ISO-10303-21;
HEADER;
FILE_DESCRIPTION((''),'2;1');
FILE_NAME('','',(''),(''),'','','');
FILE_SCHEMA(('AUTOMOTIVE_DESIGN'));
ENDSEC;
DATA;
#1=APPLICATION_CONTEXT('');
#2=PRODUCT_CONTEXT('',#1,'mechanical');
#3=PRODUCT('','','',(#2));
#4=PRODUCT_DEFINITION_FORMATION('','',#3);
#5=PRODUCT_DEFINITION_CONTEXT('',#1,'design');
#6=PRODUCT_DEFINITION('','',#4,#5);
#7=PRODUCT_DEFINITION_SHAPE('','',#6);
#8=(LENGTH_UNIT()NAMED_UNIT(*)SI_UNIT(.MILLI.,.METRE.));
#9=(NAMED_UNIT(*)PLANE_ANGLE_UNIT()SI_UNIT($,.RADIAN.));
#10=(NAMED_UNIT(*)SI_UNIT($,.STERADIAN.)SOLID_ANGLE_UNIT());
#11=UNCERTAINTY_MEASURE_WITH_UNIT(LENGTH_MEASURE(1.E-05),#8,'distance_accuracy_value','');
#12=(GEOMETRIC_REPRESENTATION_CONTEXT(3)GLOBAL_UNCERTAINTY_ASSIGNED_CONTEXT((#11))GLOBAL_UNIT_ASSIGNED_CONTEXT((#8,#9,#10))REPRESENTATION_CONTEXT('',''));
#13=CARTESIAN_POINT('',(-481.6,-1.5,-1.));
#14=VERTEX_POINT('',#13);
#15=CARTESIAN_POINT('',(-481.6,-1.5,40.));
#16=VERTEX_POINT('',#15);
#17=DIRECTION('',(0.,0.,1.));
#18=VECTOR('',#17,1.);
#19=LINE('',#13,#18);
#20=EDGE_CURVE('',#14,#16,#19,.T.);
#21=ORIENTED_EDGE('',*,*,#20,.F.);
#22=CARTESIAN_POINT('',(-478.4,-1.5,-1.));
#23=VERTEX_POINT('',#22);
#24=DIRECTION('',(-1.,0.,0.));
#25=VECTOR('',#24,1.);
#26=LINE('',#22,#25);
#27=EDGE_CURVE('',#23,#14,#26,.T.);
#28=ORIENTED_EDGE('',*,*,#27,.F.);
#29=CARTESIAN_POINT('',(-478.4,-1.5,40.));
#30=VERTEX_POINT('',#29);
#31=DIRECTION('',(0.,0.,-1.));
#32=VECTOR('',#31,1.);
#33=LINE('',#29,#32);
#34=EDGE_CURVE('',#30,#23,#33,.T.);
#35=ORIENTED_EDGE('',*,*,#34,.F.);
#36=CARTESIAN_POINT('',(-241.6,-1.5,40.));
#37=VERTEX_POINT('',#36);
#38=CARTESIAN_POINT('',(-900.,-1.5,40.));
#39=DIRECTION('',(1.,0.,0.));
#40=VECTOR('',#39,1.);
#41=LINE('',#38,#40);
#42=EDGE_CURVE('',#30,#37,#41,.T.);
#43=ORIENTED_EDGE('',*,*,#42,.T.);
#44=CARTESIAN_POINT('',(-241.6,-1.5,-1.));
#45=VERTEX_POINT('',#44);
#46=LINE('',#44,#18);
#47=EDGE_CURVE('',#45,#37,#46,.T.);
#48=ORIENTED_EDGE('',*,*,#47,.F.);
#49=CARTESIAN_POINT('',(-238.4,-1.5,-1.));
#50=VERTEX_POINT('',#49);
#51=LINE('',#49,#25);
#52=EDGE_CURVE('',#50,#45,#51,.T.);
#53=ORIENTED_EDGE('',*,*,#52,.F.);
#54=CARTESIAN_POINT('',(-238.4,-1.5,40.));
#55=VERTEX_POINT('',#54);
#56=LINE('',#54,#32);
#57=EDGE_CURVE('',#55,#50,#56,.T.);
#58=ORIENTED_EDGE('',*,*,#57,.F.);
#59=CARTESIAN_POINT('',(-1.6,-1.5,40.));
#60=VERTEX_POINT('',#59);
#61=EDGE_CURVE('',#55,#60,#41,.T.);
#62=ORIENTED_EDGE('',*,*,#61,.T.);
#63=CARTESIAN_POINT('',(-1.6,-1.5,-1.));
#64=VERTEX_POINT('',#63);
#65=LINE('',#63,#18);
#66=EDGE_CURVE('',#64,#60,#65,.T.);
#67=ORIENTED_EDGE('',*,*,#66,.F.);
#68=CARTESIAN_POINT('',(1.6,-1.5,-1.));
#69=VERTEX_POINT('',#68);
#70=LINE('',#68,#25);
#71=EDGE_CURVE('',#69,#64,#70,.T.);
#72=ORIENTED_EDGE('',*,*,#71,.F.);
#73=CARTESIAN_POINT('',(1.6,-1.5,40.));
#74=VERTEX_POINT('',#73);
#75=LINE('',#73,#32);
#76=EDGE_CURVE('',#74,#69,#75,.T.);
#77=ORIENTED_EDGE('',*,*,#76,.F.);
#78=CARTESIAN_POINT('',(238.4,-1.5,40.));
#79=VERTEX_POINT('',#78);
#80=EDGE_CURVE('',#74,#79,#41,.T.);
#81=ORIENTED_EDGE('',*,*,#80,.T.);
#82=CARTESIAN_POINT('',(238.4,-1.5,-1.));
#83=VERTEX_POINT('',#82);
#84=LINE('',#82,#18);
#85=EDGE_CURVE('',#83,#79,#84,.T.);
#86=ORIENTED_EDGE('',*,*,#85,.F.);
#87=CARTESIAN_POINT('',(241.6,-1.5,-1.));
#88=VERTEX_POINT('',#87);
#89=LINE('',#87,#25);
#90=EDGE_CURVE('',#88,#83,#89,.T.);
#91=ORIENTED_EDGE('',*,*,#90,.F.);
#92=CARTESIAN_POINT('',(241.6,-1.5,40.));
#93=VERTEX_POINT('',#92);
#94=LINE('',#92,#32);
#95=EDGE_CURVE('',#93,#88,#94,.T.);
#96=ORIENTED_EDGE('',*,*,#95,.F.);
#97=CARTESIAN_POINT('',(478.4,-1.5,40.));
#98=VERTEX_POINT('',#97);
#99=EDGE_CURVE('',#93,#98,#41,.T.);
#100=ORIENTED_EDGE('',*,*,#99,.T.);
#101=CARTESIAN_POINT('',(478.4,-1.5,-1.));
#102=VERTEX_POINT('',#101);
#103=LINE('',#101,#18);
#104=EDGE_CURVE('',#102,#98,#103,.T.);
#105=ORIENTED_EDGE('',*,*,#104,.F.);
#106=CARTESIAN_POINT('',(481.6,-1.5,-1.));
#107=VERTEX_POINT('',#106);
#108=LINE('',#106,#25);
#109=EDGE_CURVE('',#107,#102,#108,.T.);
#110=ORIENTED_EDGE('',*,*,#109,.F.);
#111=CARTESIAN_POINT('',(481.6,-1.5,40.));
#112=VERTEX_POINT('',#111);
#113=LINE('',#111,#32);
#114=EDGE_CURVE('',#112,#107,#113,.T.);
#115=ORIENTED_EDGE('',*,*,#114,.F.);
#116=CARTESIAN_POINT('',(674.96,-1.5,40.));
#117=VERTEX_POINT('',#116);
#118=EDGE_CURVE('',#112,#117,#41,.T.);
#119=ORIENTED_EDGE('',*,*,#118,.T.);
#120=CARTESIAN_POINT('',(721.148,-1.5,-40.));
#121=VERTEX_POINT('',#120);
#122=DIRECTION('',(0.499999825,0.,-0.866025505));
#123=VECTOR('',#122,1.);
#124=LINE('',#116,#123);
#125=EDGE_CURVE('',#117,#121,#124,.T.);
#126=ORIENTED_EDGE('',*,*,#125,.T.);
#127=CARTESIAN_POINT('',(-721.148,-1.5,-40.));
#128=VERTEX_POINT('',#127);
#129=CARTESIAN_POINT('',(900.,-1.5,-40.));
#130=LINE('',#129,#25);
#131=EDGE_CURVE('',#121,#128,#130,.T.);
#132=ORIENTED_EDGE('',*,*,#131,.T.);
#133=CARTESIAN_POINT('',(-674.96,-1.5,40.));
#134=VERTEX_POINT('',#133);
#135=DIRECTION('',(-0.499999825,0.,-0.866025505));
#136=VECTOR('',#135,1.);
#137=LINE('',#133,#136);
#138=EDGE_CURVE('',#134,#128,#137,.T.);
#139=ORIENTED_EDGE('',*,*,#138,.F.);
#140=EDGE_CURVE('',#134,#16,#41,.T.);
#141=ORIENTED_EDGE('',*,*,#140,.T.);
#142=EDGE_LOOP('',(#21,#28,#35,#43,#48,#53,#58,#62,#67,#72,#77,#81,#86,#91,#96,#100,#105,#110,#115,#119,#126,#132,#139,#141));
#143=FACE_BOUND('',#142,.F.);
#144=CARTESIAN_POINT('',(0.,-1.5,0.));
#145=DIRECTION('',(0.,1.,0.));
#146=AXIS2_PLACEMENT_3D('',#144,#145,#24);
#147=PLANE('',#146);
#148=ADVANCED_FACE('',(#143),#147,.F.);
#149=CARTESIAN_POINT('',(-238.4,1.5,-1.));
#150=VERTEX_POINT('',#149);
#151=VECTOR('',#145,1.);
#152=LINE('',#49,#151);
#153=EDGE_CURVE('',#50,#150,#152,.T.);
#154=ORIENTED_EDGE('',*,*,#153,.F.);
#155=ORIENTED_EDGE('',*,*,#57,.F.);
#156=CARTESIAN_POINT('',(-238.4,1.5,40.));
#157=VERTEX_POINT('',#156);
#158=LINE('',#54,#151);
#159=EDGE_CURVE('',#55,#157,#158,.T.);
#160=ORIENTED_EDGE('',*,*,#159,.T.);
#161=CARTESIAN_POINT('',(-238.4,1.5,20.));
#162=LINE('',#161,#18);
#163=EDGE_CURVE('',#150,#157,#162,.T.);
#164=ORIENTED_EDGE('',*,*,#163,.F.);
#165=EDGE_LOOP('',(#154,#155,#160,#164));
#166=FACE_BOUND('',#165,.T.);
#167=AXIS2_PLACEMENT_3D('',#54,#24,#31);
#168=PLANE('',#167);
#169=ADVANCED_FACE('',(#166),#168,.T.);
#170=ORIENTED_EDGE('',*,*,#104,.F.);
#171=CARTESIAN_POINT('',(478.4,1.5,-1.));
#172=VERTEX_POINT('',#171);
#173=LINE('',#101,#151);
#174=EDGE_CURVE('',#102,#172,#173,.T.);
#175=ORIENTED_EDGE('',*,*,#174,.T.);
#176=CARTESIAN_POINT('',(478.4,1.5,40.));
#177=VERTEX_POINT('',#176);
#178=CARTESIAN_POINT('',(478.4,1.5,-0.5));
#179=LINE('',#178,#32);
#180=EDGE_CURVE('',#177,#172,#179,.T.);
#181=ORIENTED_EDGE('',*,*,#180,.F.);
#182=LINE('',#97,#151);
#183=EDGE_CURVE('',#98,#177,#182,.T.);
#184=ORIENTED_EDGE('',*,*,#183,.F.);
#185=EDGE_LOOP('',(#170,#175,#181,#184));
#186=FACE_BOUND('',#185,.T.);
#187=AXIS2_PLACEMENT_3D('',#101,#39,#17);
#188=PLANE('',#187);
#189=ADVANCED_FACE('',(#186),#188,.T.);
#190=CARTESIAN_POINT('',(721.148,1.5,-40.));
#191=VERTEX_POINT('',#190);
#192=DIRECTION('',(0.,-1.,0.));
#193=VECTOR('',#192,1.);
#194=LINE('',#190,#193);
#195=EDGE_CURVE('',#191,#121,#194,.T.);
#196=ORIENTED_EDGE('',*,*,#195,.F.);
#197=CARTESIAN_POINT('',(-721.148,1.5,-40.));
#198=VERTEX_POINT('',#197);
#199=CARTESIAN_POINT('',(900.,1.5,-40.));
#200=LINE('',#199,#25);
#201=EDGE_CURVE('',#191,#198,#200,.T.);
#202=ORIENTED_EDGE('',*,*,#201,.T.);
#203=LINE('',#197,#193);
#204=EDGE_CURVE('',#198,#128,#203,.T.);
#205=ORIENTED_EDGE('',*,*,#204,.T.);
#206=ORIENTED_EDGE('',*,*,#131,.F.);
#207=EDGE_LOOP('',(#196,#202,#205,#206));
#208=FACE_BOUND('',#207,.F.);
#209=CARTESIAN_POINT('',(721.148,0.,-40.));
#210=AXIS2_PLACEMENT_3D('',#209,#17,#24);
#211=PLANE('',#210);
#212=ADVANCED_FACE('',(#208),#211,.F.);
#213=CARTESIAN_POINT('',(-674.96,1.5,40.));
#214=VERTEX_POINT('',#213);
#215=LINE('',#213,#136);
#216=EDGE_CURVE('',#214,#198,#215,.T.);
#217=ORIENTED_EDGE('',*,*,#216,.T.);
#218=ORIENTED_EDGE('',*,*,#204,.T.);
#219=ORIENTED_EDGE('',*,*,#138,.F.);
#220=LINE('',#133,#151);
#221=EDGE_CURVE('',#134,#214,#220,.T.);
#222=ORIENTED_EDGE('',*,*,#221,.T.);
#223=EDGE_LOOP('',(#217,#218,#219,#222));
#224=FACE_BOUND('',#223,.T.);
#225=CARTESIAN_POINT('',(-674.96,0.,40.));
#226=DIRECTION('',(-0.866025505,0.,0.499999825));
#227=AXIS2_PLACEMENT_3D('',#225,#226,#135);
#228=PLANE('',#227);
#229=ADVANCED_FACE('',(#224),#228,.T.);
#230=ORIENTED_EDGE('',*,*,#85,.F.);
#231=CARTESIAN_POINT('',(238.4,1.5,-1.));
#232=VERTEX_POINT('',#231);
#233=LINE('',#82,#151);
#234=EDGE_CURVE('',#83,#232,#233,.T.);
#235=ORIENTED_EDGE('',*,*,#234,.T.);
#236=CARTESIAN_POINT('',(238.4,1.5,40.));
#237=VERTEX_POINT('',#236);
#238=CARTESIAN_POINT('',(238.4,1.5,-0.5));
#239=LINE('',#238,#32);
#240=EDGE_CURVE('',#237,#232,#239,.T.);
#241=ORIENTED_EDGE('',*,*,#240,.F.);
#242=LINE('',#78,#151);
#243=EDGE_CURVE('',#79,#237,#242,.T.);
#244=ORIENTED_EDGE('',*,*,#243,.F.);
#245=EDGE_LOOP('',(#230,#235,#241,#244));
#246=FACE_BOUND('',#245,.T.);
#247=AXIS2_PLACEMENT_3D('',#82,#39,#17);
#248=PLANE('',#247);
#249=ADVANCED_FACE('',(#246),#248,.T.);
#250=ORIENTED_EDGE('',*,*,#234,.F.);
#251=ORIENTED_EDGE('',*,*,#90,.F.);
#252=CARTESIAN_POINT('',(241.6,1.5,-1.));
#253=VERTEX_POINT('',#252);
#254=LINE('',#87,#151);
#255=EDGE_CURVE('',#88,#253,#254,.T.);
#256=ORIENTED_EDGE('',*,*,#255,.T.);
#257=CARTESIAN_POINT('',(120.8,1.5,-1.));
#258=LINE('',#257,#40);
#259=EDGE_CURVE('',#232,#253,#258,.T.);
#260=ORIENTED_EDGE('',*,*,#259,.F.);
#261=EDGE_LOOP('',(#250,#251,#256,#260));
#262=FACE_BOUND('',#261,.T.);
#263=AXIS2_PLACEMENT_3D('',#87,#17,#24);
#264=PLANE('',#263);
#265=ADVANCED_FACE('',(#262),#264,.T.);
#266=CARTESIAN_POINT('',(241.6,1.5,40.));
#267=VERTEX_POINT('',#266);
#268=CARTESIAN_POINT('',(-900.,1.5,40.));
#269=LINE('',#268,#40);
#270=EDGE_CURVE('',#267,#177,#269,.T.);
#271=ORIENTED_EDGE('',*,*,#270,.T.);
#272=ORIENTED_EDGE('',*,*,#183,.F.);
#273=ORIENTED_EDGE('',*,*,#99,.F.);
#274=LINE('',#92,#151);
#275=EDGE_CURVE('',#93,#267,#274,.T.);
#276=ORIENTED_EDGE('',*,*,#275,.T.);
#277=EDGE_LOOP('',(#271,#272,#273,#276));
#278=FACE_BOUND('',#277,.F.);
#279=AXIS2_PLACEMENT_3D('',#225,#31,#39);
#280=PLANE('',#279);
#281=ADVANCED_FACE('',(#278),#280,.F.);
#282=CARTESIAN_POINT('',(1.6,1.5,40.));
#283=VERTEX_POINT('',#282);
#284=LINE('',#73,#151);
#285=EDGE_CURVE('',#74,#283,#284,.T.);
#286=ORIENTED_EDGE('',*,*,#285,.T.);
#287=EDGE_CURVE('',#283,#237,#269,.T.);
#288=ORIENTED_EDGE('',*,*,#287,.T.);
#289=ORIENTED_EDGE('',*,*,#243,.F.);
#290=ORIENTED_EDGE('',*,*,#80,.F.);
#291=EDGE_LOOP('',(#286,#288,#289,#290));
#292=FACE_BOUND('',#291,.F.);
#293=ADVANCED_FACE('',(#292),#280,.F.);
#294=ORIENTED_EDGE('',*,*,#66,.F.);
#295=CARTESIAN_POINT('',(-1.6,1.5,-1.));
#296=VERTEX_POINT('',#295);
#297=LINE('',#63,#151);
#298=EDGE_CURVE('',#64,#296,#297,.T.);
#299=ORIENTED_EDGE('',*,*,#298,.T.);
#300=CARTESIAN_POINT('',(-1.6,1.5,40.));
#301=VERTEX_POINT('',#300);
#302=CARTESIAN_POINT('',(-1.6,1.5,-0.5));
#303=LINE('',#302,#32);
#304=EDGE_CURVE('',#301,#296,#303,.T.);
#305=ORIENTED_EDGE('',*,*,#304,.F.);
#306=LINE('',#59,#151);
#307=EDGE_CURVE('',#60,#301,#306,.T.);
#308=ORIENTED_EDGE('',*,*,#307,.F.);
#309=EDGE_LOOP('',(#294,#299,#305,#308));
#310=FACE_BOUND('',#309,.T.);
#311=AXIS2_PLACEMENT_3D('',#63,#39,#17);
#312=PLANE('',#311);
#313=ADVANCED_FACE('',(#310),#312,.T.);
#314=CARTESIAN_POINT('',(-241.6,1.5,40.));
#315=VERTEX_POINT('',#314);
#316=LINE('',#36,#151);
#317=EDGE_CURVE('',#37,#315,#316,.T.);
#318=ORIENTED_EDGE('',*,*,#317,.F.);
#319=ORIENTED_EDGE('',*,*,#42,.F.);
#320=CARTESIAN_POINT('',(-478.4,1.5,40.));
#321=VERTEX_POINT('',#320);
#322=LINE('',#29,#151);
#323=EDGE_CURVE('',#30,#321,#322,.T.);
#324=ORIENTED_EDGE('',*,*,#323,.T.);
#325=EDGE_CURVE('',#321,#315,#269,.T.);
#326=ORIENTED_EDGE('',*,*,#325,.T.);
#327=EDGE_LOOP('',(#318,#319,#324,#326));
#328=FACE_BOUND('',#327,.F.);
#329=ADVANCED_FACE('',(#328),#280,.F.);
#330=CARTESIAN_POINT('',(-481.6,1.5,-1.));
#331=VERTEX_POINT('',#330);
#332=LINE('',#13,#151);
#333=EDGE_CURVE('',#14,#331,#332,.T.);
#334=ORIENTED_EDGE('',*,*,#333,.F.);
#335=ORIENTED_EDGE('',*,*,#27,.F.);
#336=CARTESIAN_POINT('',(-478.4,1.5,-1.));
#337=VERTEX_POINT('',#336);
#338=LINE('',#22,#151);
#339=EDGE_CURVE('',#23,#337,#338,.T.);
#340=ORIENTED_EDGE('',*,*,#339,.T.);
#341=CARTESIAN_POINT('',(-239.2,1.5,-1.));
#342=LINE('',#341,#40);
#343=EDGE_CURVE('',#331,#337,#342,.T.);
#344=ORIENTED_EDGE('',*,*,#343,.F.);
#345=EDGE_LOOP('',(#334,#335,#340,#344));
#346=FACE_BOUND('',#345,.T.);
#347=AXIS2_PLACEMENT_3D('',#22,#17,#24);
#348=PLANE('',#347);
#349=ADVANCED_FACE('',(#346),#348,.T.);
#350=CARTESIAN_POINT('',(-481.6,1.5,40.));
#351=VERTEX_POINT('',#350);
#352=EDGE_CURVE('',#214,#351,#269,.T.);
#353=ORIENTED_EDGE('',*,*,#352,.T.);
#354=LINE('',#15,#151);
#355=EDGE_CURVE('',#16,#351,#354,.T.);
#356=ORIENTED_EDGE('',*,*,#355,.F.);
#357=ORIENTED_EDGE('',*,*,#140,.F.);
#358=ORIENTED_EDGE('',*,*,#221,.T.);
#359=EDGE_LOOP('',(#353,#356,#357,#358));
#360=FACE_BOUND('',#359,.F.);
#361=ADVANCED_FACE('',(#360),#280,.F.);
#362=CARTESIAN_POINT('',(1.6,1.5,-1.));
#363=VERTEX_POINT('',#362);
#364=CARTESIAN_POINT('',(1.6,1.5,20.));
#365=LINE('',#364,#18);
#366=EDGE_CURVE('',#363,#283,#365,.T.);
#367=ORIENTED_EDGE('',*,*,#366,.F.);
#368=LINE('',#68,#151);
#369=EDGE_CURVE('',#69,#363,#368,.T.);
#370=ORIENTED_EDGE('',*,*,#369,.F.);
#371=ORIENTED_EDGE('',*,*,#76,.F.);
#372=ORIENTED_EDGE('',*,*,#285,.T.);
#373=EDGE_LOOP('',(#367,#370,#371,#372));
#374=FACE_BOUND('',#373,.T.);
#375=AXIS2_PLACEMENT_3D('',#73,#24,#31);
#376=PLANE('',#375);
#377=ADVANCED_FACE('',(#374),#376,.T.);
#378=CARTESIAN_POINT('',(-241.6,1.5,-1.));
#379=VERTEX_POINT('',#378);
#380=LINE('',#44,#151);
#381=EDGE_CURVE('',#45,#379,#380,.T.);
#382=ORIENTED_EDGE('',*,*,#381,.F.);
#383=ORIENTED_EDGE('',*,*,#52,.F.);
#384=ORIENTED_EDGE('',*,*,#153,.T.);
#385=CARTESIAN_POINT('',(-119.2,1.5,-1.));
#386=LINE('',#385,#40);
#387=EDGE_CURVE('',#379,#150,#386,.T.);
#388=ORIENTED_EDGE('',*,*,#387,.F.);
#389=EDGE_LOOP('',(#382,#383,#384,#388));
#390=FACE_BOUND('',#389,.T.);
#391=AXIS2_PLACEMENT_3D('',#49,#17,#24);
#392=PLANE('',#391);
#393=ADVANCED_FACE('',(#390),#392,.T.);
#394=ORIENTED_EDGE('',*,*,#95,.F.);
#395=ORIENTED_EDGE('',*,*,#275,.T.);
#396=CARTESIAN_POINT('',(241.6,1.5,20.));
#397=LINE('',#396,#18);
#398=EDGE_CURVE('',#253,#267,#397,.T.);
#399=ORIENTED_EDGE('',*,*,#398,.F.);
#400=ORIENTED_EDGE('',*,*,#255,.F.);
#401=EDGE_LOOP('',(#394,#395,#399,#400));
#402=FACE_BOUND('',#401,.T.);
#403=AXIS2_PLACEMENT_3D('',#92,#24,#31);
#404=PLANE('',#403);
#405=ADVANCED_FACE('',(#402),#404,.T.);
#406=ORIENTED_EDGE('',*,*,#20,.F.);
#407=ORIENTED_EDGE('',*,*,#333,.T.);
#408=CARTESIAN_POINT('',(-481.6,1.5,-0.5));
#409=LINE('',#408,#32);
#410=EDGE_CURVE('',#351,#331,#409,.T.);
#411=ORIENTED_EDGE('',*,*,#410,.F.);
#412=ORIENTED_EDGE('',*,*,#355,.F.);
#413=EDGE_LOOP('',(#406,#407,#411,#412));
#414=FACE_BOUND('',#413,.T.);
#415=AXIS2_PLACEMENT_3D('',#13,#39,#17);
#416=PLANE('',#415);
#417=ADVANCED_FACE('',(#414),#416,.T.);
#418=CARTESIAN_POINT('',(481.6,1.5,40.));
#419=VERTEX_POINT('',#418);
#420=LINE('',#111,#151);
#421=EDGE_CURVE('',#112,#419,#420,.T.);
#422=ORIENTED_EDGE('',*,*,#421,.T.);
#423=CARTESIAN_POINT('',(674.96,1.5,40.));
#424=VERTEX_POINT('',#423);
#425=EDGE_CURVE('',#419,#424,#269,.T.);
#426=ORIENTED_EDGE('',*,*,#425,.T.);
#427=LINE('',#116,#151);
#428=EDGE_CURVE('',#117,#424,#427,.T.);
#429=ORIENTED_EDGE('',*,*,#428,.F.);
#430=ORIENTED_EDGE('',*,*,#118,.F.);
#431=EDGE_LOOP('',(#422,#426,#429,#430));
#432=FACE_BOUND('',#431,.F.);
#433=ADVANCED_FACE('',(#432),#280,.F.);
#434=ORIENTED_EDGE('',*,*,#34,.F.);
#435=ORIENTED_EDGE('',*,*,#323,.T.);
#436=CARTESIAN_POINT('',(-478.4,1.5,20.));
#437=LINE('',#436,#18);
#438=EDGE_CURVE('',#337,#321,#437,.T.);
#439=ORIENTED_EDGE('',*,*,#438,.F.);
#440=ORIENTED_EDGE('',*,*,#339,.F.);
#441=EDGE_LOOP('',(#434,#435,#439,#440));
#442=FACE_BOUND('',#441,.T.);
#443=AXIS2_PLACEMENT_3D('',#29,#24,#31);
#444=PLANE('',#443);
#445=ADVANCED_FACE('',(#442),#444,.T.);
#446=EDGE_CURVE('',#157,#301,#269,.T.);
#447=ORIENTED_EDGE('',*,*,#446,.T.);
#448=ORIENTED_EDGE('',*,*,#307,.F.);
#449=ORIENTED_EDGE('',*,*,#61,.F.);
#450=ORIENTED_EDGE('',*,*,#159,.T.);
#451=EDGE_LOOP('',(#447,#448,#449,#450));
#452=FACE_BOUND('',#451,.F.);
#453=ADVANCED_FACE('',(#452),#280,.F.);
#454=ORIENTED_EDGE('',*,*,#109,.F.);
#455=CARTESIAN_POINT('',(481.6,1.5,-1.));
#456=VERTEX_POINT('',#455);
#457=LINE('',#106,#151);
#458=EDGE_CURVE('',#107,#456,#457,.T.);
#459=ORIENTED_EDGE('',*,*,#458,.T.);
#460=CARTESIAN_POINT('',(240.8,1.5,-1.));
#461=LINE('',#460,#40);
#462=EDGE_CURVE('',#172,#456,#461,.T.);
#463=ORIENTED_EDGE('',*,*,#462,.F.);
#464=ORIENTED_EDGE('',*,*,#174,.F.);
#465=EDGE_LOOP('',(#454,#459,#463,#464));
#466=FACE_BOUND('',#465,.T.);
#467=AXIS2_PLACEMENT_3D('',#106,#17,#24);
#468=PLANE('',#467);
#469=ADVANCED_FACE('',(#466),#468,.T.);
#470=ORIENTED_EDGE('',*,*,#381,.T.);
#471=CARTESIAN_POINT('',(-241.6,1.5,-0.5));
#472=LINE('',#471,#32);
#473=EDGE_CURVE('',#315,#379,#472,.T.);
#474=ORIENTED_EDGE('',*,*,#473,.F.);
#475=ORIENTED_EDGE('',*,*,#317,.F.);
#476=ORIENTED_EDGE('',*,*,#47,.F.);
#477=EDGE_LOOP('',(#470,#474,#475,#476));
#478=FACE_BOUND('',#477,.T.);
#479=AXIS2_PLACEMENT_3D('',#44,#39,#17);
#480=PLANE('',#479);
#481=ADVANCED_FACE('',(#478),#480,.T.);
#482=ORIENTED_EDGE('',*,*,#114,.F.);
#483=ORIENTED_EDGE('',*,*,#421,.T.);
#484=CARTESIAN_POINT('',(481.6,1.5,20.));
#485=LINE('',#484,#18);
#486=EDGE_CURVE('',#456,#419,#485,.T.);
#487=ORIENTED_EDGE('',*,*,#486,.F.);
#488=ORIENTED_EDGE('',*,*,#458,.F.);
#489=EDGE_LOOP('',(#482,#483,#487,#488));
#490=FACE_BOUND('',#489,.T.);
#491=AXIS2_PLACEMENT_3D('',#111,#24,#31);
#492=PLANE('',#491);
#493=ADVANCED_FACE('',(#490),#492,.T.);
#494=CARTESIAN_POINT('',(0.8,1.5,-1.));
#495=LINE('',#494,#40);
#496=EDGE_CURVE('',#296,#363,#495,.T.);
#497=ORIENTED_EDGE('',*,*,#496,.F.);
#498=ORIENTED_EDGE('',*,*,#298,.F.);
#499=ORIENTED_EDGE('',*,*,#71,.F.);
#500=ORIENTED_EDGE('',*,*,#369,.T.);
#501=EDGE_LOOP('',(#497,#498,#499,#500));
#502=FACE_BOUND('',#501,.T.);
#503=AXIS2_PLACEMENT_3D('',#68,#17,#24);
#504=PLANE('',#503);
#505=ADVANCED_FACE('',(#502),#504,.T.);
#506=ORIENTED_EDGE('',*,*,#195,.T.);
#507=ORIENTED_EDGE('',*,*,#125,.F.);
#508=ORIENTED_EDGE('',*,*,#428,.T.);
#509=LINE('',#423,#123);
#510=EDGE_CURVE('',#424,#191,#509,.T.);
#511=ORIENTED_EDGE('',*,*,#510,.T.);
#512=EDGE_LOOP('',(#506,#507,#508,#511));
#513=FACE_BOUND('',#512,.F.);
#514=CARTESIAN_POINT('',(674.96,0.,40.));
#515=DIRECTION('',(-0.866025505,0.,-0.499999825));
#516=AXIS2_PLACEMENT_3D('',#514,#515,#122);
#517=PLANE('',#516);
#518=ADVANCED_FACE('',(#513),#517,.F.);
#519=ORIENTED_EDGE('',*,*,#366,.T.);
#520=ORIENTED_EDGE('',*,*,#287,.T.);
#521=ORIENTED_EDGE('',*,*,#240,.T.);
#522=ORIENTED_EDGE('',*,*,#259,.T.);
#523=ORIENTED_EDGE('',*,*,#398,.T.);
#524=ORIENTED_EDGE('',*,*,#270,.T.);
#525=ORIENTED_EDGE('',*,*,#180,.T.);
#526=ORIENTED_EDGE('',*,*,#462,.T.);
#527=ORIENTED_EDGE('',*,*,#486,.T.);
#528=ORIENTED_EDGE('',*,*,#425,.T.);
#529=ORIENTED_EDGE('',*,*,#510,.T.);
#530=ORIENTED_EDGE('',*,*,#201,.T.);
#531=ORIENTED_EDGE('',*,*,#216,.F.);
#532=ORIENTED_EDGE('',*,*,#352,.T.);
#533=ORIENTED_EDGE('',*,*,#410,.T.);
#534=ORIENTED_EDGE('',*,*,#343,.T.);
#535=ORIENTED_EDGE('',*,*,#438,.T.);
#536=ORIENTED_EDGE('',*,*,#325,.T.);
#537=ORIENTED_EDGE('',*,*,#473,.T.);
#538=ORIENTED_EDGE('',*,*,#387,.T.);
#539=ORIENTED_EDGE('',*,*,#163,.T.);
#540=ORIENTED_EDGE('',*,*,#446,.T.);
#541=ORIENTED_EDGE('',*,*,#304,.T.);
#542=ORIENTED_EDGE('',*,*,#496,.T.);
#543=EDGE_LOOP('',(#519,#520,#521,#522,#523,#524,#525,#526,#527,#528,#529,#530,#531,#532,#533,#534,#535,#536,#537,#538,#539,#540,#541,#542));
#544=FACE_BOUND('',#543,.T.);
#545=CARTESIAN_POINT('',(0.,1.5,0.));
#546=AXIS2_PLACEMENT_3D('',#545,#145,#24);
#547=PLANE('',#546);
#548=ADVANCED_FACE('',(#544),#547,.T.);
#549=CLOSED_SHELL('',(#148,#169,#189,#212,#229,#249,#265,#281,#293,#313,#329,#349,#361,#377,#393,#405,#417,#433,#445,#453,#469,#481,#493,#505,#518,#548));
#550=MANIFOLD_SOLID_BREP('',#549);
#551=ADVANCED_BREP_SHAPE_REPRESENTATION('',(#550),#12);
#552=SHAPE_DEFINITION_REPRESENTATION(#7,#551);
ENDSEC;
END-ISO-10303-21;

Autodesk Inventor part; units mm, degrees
ref_plane "YZ Plane" through (0, 0, 0) normal (1, 0, 0) x (0, 1, 0)
ref_plane "XZ Plane" through (0, 0, 0) normal (0, 1, 0) x (-1, 0, 0)
ref_plane "XY Plane" through (0, 0, 0) normal (0, 0, 1) x (1, 0, 0)
sketch "Sketch1" plane through (0, 0, 0) normal (0, 1, 0) x (-1, 0, 0)
  line L0 (900, 40) -> (-900, 40)
  line L1 (-900, 40) -> (-900, -40)
  line L2 (-900, -40) -> (900, -40)
  line L3 (900, -40) -> (900, 40)
  line L4 (900, 40) -> (-900, -40) construction
  line L5 (674.96, 40) -> (721.148, -40)
  line L6 (0, 40) -> (0, -40) construction
  line L7 (-674.96, 40) -> (-721.148, -40)
  point P0 (0, 0)
  point P1 (0, 0)
  dimension "d0" = 80
  dimension "d1" = 1800
  dimension "d3" = 120
  dimension "d6" = 674.96
  dimension "d7" = 120
  dimension "d8" = 674.96
extrude "Plate1" add sketch "Sketch1" along normal mid plane 3 contours L5 L2 L7 L0
sketch "Sketch2" plane through (0, -1.5, 0) normal (0, -1, 0) x (1, 0, 0)
  line L0 (-1.6, 40) -> (1.6, 40)
  line L1 (1.6, 40) -> (1.6, -1)
  line L2 (1.6, -1) -> (-1.6, -1)
  line L3 (-1.6, -1) -> (-1.6, 40)
  line L4 (-674.96, 40) -> (674.96, 40) projected
  point P0 (0, 0)
  point P1 (0, 40)
  dimension "d9" = 3.2
  dimension "d10" = 41
extrude "Extrusion1" cut sketch "Sketch2" against normal through all
pattern_linear "Rectangular Pattern1" count 5 spacing 240 along (1, 0, 0) of "Extrusion1" first direction both ways yes
equation "\"d7\" = d3"
equation "\"d8\" = d6"
equation "\"d2\" = Thickness"
equation "\"BendReliefWidth\" = Thickness"
equation "\"BendReliefDepth\" = 0.5 * Thickness"
equation "\"CornerReliefSize\" = 4 * Thickness"
equation "\"MinimumRemnant\" = 2 * Thickness"
equation "\"TransitionRadius\" = BendRadius"
equation "\"JacobiRadiusSize\" = BendRadius"
equation "\"GapSize\" = Thickness"
equation "\"Thickness\" = 3"
equation "\"BendRadius\" = 5"
properties part number "MSC 203 GRID" material "Stainless Steel"
